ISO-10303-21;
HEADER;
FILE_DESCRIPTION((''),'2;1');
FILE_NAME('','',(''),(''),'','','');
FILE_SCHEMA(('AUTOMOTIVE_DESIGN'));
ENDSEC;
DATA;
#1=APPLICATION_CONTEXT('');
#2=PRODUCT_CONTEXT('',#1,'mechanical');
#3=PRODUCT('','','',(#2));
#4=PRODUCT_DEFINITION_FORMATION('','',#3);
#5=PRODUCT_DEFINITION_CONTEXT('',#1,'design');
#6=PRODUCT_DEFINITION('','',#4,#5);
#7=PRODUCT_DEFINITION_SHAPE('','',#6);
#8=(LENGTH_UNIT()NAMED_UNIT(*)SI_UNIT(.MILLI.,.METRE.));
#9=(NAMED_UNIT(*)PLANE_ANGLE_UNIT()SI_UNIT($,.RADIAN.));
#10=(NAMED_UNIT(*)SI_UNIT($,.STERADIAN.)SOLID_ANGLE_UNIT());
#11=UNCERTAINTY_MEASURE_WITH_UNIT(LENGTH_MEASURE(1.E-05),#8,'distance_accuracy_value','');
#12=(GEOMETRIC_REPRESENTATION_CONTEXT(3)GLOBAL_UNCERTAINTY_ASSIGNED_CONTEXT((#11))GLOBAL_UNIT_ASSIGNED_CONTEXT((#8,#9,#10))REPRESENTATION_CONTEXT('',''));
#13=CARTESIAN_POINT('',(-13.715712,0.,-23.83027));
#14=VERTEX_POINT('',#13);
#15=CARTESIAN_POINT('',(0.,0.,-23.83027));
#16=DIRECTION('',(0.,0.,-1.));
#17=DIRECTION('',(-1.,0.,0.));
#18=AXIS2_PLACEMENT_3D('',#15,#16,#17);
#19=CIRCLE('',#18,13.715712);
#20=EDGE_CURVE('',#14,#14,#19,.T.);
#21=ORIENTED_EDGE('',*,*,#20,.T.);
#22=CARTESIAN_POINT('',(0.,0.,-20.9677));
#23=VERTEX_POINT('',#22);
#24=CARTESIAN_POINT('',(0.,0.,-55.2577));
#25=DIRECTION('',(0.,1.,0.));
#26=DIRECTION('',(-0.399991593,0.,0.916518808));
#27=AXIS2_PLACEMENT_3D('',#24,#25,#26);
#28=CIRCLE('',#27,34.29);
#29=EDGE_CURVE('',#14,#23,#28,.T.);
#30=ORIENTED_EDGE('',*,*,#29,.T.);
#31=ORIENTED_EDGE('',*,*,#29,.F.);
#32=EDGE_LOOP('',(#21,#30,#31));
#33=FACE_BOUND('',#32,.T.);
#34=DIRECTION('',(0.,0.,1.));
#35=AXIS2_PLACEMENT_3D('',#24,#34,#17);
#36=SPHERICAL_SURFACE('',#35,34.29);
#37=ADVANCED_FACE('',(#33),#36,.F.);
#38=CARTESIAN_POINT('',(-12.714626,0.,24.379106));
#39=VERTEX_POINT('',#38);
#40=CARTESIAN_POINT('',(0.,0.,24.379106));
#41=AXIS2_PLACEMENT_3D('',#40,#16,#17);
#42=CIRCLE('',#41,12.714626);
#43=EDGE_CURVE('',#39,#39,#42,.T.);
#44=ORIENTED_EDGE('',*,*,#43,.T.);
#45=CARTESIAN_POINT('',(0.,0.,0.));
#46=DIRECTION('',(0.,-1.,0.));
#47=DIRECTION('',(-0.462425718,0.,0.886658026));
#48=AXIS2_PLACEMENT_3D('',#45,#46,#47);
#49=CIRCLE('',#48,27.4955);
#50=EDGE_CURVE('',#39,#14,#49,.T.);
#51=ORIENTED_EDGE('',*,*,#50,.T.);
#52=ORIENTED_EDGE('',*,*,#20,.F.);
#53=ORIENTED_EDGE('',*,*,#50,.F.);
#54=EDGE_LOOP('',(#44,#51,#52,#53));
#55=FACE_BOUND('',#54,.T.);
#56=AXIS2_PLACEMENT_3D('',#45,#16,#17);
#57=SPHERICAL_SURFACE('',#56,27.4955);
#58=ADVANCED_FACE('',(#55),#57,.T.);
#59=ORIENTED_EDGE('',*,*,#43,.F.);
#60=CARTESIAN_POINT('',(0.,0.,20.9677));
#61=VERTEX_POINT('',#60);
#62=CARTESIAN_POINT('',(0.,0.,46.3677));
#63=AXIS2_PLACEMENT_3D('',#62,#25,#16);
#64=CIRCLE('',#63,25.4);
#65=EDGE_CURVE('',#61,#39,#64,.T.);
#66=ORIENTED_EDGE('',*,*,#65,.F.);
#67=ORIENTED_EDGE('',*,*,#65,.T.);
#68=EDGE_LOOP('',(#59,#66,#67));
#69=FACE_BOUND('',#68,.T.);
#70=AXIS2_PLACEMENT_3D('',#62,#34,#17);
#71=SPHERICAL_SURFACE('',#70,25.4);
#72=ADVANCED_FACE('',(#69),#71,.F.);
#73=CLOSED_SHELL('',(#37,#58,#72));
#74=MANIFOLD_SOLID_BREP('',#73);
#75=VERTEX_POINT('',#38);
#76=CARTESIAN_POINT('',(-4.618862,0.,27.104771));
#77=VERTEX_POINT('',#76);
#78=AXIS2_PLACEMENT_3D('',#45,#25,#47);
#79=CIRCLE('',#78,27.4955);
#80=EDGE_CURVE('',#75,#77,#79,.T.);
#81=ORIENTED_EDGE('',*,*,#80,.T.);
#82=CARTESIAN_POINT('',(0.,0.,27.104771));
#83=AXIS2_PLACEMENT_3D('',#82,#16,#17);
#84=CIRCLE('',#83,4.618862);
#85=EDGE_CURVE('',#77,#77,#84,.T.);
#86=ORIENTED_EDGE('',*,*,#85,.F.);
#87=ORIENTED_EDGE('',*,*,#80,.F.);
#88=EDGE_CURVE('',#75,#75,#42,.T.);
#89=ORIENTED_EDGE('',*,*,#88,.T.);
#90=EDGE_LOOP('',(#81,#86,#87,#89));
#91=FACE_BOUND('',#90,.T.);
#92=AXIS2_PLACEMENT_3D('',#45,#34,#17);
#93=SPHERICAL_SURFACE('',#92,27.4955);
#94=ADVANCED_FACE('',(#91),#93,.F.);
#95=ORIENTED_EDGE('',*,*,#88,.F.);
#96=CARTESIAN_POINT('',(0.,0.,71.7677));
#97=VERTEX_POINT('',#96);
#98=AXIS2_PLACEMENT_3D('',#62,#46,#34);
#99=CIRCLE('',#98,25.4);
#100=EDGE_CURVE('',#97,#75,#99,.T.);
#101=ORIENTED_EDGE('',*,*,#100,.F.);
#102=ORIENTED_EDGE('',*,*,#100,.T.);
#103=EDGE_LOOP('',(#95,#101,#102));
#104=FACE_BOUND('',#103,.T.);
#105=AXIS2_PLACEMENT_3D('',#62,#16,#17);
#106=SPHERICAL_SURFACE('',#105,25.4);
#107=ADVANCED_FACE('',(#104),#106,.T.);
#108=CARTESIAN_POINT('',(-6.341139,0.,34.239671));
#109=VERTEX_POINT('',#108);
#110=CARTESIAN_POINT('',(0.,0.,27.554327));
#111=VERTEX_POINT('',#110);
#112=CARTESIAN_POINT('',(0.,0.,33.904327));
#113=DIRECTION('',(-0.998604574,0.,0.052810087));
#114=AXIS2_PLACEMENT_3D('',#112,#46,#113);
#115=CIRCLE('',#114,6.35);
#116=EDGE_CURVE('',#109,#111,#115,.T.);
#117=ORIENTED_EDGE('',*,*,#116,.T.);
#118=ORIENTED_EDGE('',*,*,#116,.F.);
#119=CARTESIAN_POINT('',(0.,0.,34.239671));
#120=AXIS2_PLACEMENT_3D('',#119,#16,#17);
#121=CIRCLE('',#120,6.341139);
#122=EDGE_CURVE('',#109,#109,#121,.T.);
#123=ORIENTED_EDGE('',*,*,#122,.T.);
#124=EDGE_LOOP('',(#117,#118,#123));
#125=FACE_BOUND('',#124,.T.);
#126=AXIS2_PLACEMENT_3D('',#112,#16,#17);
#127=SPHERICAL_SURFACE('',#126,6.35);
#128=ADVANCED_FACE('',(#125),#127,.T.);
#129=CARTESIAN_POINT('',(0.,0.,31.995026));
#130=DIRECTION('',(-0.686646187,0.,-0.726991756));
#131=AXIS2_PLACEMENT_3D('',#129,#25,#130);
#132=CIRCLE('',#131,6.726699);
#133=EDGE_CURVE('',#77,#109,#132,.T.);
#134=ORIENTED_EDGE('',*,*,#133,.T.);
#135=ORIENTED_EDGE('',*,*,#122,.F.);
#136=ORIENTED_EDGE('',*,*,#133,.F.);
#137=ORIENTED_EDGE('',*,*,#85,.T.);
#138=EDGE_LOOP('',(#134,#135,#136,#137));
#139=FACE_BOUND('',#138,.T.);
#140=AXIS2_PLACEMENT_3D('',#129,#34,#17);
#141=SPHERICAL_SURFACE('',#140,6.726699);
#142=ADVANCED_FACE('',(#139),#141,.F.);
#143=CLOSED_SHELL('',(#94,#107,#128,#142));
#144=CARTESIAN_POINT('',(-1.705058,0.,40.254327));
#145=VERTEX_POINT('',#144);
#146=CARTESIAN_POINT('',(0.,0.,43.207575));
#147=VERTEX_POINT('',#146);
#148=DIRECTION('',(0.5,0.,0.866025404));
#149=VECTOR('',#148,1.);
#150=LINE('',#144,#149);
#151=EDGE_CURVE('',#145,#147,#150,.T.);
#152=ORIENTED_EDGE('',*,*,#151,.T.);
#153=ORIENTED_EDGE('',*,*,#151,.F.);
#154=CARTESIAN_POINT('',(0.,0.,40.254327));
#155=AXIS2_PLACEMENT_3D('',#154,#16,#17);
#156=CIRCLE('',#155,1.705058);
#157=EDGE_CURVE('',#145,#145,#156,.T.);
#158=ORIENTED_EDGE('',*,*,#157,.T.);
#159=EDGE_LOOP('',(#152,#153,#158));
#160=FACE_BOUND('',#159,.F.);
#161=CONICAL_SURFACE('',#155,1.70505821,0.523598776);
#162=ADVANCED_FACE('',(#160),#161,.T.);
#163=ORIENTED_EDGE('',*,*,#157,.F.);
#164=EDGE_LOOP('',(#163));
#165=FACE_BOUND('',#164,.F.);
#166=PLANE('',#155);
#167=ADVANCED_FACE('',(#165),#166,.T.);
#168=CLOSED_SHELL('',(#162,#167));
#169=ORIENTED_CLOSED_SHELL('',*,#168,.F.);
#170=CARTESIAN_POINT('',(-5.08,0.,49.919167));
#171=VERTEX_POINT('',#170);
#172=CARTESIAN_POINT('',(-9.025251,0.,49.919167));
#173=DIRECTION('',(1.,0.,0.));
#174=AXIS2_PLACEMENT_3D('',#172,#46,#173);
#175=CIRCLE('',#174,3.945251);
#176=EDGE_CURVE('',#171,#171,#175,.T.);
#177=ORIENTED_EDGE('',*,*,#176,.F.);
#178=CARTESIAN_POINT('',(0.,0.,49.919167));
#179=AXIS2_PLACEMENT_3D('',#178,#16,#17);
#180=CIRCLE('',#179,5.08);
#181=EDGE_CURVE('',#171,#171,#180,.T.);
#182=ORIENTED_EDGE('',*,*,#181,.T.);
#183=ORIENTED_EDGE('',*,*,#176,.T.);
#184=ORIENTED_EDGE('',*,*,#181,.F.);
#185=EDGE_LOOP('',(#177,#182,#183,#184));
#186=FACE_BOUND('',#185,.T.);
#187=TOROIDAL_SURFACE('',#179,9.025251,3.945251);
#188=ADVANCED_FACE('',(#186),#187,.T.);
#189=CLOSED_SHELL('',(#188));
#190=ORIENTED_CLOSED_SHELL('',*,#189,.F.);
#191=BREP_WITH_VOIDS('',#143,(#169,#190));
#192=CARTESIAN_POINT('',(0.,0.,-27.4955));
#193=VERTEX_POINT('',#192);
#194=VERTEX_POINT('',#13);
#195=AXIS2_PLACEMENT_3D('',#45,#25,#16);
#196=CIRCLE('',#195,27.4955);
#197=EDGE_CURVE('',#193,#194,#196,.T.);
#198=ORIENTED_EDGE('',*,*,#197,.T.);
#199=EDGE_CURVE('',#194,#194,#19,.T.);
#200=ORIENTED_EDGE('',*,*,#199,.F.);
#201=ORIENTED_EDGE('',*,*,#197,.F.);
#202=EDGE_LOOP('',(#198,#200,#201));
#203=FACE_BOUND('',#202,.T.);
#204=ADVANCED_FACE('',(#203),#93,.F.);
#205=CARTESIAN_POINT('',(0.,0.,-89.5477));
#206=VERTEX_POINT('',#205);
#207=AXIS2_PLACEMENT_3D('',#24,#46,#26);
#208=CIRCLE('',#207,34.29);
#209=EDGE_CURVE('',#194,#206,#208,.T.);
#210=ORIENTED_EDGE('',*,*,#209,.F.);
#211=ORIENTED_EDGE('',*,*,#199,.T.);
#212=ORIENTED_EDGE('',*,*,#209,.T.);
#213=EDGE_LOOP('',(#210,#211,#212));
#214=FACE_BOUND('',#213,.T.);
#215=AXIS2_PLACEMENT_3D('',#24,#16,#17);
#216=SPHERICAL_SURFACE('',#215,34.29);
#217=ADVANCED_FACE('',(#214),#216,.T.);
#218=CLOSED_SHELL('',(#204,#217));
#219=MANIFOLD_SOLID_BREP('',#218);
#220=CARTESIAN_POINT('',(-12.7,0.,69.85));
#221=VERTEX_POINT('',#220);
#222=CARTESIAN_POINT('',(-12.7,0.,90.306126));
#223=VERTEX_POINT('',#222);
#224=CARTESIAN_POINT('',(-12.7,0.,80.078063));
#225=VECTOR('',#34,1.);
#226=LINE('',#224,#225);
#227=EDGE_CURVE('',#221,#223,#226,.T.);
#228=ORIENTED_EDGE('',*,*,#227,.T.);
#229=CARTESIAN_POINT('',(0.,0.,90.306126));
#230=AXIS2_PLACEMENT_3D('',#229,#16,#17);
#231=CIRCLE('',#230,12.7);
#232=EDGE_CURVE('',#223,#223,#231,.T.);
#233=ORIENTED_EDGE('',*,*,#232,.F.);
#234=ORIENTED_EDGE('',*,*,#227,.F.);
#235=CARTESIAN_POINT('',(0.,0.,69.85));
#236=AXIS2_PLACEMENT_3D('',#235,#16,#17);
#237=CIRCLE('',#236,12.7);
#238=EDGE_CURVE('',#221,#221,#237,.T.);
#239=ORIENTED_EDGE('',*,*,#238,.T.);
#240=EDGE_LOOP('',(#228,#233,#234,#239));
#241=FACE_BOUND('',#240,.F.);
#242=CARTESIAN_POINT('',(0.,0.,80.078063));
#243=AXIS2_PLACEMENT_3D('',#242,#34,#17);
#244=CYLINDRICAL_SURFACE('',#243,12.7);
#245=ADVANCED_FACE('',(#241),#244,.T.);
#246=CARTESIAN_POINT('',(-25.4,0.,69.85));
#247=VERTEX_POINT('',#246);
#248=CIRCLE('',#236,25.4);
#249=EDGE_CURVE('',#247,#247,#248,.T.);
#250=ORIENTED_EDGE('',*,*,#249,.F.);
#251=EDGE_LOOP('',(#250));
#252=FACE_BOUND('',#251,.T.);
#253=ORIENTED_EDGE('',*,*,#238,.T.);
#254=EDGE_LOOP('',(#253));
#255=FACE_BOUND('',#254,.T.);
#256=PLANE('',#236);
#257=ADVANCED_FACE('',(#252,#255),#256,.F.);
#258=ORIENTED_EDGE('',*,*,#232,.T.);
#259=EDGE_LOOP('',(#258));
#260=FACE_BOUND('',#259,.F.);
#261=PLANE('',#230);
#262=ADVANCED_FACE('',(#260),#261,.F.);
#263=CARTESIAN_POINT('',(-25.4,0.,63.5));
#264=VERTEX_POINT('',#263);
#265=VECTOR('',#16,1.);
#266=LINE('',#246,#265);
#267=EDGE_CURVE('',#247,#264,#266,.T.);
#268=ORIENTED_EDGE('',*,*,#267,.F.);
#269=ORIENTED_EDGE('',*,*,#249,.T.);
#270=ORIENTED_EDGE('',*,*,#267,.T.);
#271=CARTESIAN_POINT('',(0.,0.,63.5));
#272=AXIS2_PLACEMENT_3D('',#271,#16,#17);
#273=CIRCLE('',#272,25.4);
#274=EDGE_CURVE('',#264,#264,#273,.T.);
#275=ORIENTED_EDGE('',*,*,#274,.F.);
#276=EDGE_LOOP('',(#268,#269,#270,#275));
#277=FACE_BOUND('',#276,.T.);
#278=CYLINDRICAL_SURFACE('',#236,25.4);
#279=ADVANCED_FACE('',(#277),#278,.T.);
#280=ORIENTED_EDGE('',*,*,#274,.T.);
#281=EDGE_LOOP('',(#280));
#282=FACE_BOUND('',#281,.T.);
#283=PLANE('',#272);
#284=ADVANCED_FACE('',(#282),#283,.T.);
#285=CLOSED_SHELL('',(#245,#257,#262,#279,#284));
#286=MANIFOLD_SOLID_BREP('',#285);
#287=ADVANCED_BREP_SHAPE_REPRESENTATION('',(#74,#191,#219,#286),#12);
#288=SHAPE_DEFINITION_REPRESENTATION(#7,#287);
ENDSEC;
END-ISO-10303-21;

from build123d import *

# Parameters (mm, degrees)
F0_R = 3.9452510547
F1_W = 12.7
F1_H = 20.4561264838


# Not quite as in the source:
# - the program builds the solid bodies; features that only make, move or delete a surface that nothing else refers to are left out


with BuildPart() as f2:
    # F0 (on Front) → F2 (revolve)
    with BuildSketch(Plane.XZ):
        with BuildLine():
            ThreePointArc((0, 71.7677), (-24.5323286084, 52.9498617307), (-12.714626341, 24.3791057518))
            ThreePointArc((-12.714626341, 24.3791057518), (-8.7732416217, 26.0582568814), (-4.6188620822, 27.1047714123))
            ThreePointArc((-4.6188620822, 27.1047714123), (-6.538891729, 30.4166180357), (-6.3411390434, 34.2396712366))
            ThreePointArc((-6.3411390434, 34.2396712366), (-4.6071647855, 29.5343692183), (0, 27.5543271861))
            Line((0, 27.5543271861), (0, 40.2543271861))
            Line((0, 40.2543271861), (-1.7050582101, 40.2543271861))
            Line((-1.7050582101, 40.2543271861), (0, 43.2075746357))
            Line((0, 43.2075746357), (0, 71.7677))
        make_face()
        with Locations((-9.0252510547, 49.9191674486)):
            Circle(F0_R, mode=Mode.SUBTRACT)
    revolve(axis=Axis((0, 0, -8.89), (0, 0, -1)))


with BuildPart() as f2b:
    # F0 (on Front) → F2, piece 2 (revolve)
    with BuildSketch(Plane.XZ):
        with BuildLine():
            Line((0, -20.9677), (0, 20.9677))
            ThreePointArc((0, 20.9677), (-6.5821617307, 21.8353713916), (-12.714626341, 24.3791057518))
            ThreePointArc((-12.714626341, 24.3791057518), (-27.4895738801, 0.5708310965), (-13.7157117337, -23.8302700758))
            ThreePointArc((-13.7157117337, -23.8302700758), (-7.0056237374, -21.6909703998), (0, -20.9677))
        make_face()
    revolve(axis=Axis((0, 0, -8.89), (0, 0, -1)))


with BuildPart() as f2c:
    # F0 (on Front) → F2, piece 3 (revolve)
    with BuildSketch(Plane.XZ):
        with BuildLine():
            Line((0, -89.5477), (0, -27.4955))
            ThreePointArc((0, -27.4955), (-7.0984973544, -26.5633931485), (-13.7157117337, -23.8302700758))
            ThreePointArc((-13.7157117337, -23.8302700758), (-33.5667296002, -62.2633237374), (0, -89.5477))
        make_face()
    revolve(axis=Axis((0, 0, -8.89), (0, 0, -1)))


with BuildPart() as f3:
    # F1 (on Front) → F3 (revolve)
    with BuildSketch(Plane.XZ):
        with Locations((-6.35, 80.0780632419)):
            Rectangle(F1_W, F1_H)
        Polygon((0, 63.5), (0, 69.85), (-12.7, 69.85), (-25.4, 69.85), (-25.4, 63.5), align=None)
    revolve(axis=Axis((0, 0, 66.675), (0, 0, -1)))


solid = Compound([f2.part, f2b.part, f2c.part, f3.part])
